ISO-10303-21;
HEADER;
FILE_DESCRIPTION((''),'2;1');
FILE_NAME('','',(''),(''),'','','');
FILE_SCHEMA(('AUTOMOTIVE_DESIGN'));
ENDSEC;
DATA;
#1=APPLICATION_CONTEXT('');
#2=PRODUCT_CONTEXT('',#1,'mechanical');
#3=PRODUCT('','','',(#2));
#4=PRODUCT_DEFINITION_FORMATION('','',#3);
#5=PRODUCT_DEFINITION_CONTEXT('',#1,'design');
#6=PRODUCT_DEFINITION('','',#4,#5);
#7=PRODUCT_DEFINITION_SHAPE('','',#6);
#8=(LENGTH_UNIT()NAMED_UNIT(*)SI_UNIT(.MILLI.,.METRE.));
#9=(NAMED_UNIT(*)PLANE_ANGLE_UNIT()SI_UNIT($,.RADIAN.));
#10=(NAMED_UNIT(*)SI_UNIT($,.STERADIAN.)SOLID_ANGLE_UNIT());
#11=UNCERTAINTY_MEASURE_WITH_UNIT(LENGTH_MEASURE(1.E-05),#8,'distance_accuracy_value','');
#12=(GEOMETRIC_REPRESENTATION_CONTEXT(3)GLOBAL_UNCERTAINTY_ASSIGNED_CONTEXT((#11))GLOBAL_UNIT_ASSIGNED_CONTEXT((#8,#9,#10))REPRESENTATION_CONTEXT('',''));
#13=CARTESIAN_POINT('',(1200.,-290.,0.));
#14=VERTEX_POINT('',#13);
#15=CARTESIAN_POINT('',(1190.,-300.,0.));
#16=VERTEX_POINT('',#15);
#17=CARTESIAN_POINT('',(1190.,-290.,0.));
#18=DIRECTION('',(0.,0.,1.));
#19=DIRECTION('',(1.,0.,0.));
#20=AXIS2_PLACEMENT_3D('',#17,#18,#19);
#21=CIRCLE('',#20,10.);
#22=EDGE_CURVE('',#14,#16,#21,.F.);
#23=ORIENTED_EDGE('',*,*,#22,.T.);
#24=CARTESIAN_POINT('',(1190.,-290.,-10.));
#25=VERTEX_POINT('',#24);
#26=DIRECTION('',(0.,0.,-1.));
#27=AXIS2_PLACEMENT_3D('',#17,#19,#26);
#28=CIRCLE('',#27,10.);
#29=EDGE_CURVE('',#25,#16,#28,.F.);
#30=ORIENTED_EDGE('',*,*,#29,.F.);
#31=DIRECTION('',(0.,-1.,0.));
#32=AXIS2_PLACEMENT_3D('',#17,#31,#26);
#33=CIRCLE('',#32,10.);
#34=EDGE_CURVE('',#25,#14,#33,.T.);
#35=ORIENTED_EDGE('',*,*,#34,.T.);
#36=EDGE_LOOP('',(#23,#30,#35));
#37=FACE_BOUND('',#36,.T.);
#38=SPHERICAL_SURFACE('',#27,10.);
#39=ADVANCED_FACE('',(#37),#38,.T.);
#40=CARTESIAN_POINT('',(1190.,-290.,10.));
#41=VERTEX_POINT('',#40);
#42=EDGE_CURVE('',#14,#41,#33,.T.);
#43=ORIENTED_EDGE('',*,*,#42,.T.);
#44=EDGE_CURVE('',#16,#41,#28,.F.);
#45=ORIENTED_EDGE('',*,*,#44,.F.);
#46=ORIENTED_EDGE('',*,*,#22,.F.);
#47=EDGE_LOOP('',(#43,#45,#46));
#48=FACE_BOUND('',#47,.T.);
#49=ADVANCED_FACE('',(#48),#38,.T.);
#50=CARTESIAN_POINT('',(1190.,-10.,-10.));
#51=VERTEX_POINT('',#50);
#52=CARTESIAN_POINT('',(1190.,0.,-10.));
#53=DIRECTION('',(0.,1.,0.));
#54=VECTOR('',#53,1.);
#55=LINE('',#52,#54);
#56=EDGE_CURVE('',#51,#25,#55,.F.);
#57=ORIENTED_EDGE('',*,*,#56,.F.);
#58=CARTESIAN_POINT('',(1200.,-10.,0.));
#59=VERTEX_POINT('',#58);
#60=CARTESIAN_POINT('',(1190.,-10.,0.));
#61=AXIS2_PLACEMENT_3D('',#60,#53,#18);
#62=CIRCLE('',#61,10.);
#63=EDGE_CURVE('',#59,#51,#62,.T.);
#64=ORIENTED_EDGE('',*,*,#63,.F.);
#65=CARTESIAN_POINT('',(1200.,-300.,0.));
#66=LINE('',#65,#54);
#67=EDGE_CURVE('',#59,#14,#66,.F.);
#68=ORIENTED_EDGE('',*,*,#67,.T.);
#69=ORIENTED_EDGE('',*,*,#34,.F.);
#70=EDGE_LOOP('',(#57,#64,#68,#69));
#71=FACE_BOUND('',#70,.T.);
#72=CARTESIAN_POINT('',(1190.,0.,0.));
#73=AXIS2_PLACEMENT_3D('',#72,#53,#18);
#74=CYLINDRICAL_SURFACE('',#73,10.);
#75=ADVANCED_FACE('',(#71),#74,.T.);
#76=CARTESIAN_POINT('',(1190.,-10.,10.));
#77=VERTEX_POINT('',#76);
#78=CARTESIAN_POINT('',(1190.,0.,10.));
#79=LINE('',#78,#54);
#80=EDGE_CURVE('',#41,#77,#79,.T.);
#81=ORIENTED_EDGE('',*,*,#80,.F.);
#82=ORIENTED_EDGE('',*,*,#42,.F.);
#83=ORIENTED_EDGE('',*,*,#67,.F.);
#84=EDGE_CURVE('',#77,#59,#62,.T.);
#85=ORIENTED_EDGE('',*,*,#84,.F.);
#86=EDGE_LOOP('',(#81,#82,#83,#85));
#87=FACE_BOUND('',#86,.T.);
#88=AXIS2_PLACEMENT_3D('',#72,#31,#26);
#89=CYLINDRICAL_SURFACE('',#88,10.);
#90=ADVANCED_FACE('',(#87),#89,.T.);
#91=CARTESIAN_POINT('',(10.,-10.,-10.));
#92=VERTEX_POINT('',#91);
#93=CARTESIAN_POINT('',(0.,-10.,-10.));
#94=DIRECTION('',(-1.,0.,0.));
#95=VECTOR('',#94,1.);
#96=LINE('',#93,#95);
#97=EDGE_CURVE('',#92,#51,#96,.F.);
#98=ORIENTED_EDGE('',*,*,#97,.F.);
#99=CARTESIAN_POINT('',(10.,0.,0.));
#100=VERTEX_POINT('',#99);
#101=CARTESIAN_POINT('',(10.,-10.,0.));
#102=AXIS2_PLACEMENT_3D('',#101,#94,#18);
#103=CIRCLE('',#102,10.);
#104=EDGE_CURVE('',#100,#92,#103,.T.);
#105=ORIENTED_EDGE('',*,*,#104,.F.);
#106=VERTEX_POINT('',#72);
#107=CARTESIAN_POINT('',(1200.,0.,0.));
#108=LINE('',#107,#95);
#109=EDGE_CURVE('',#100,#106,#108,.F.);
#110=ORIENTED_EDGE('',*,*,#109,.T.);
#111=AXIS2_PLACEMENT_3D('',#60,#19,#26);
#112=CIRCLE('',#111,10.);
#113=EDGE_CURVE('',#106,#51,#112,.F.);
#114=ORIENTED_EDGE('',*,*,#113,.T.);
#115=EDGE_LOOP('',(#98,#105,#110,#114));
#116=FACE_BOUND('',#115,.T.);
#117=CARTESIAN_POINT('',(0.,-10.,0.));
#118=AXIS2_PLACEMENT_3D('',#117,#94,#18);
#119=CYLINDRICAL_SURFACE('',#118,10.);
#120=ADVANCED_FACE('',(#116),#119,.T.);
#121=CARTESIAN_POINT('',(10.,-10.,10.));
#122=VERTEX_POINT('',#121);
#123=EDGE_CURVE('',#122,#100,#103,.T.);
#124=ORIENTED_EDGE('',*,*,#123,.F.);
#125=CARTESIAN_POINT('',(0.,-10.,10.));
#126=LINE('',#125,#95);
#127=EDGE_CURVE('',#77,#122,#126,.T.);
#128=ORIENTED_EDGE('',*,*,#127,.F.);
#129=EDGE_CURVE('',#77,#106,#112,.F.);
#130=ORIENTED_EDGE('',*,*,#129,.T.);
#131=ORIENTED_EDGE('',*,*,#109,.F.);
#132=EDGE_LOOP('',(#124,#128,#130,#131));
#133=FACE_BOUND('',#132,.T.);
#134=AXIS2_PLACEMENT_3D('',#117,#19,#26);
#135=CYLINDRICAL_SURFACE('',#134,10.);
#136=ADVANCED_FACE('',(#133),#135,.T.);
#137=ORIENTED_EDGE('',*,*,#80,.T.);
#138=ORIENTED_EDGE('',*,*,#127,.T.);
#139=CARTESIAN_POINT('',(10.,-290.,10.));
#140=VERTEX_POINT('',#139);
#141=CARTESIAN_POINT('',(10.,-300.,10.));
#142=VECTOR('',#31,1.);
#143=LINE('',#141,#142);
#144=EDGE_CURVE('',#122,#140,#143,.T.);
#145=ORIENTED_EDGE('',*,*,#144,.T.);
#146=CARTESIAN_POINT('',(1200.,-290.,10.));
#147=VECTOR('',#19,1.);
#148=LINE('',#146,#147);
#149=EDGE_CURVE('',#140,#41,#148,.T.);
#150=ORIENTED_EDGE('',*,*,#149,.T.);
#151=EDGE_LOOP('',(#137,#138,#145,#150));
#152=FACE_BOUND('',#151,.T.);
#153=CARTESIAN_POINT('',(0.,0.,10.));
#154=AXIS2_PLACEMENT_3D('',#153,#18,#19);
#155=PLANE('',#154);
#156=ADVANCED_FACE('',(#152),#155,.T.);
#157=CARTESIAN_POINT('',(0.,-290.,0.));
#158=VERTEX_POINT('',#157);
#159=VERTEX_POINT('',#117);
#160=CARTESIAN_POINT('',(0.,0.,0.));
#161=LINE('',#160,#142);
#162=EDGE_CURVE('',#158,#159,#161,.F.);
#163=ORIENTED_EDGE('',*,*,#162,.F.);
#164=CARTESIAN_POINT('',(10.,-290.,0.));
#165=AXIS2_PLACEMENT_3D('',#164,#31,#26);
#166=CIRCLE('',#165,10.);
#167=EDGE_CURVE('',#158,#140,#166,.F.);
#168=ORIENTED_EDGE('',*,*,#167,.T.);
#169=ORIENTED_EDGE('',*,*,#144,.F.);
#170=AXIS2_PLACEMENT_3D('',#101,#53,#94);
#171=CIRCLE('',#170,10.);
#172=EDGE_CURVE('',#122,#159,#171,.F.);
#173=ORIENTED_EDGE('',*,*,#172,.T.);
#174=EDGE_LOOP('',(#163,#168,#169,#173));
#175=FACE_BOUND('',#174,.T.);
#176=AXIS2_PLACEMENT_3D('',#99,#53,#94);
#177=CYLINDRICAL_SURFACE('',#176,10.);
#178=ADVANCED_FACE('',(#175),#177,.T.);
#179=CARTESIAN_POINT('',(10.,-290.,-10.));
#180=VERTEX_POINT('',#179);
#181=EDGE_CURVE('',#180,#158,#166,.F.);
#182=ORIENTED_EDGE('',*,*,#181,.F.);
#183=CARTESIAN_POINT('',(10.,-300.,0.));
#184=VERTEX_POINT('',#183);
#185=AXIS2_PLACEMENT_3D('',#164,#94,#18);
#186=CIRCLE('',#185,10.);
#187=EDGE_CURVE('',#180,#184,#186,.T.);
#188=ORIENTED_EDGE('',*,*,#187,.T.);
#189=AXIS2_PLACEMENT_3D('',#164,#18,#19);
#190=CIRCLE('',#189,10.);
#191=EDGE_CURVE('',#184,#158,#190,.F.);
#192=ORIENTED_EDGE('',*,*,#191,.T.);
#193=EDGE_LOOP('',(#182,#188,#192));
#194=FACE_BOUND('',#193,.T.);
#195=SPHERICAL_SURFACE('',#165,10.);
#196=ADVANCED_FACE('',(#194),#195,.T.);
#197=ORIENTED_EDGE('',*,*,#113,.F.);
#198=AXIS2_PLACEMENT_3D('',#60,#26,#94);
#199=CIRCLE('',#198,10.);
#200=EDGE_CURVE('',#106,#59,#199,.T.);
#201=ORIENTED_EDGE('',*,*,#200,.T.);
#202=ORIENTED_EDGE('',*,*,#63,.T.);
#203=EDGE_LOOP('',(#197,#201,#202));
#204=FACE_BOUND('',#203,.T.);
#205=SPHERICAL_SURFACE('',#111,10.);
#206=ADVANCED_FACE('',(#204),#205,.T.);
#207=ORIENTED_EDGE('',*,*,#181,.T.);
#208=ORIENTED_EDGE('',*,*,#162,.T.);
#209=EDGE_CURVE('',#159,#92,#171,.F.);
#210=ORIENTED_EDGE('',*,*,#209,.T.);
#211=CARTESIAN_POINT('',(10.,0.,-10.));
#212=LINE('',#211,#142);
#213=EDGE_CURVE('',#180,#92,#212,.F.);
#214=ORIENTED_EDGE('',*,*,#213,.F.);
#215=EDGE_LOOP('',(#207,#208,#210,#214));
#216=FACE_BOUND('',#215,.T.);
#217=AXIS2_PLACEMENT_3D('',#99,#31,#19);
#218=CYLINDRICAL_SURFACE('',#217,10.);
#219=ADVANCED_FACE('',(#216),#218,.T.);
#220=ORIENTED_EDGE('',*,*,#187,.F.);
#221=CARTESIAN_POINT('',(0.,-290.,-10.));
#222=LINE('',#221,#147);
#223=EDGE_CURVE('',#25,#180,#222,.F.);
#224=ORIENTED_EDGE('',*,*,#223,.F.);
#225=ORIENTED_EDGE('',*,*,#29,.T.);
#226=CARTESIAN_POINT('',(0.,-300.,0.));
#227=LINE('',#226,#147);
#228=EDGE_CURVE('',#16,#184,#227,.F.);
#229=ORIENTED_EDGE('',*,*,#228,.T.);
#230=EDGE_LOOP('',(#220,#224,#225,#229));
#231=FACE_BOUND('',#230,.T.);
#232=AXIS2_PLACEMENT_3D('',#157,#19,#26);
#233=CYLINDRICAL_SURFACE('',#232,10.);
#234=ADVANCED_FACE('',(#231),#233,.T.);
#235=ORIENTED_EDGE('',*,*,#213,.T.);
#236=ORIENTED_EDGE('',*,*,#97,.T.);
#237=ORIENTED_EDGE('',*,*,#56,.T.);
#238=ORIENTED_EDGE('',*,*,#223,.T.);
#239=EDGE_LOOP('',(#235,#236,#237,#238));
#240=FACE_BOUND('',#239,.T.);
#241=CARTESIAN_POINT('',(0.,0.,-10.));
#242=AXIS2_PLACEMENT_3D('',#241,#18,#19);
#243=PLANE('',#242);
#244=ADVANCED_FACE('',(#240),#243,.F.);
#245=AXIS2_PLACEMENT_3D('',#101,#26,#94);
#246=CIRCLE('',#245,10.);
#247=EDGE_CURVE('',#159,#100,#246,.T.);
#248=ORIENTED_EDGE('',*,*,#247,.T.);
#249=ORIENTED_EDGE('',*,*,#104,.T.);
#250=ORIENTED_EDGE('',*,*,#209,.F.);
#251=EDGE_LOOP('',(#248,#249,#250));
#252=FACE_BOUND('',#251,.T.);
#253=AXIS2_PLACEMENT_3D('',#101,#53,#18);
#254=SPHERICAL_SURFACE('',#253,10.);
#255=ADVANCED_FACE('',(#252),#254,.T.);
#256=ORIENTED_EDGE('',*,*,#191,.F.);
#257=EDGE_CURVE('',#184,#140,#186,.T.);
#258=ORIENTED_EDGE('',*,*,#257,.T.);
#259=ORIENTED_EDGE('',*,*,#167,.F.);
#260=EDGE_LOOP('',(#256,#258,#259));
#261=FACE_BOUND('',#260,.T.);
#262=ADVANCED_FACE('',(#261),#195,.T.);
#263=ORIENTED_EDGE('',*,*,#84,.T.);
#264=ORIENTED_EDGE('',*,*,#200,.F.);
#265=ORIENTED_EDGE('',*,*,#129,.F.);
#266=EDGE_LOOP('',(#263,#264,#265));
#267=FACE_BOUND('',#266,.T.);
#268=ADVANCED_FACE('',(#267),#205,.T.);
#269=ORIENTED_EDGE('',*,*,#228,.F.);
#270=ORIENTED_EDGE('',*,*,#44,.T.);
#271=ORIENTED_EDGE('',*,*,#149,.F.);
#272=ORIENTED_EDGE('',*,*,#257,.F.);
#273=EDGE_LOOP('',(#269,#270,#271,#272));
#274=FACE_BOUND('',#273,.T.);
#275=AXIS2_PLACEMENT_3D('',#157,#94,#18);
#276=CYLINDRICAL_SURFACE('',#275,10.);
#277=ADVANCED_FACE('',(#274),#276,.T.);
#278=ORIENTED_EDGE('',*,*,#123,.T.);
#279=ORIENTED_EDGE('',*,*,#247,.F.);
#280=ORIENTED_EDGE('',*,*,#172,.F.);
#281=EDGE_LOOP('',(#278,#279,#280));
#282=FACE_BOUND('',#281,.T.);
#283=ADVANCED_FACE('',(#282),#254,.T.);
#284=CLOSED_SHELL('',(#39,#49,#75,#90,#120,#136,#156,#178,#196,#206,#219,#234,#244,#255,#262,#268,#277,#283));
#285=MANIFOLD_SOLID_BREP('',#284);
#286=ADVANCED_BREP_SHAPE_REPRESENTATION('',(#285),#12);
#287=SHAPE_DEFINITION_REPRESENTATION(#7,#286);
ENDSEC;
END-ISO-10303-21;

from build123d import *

# Parameters (mm, degrees)
SKETCH1_W           = 1200
SKETCH1_H           = 300
BOSS_EXTRUDE1_DEPTH = 10
FILLET1_R           = 10


with BuildPart() as part:
    # Sketch1 → Boss-Extrude1 (new, symmetric)
    with BuildSketch(Plane.XY):
        with Locations((600, -150)):
            Rectangle(SKETCH1_W, SKETCH1_H)
    extrude(amount=BOSS_EXTRUDE1_DEPTH, both=True)

    # Fillet1
    fillet1_edges = [part.edges().sort_by_distance(p)[0] for p in [
        (1200, -150, 10),
        (600, 0, 10),
        (0, -150, 10),
        (600, 0, -10),
        (1200, -150, -10),
        (600, -300, -10),
        (0, -150, -10),
        (0, 0, 0),
        (1200, 0, 0),
        (1200, -300, 0),
        (0, -300, 0),
        (600, -300, 10),
    ]]
    fillet(fillet1_edges, radius=FILLET1_R - 0.0001)  # a hair under: the kernel refuses the full size


solid = part.part
